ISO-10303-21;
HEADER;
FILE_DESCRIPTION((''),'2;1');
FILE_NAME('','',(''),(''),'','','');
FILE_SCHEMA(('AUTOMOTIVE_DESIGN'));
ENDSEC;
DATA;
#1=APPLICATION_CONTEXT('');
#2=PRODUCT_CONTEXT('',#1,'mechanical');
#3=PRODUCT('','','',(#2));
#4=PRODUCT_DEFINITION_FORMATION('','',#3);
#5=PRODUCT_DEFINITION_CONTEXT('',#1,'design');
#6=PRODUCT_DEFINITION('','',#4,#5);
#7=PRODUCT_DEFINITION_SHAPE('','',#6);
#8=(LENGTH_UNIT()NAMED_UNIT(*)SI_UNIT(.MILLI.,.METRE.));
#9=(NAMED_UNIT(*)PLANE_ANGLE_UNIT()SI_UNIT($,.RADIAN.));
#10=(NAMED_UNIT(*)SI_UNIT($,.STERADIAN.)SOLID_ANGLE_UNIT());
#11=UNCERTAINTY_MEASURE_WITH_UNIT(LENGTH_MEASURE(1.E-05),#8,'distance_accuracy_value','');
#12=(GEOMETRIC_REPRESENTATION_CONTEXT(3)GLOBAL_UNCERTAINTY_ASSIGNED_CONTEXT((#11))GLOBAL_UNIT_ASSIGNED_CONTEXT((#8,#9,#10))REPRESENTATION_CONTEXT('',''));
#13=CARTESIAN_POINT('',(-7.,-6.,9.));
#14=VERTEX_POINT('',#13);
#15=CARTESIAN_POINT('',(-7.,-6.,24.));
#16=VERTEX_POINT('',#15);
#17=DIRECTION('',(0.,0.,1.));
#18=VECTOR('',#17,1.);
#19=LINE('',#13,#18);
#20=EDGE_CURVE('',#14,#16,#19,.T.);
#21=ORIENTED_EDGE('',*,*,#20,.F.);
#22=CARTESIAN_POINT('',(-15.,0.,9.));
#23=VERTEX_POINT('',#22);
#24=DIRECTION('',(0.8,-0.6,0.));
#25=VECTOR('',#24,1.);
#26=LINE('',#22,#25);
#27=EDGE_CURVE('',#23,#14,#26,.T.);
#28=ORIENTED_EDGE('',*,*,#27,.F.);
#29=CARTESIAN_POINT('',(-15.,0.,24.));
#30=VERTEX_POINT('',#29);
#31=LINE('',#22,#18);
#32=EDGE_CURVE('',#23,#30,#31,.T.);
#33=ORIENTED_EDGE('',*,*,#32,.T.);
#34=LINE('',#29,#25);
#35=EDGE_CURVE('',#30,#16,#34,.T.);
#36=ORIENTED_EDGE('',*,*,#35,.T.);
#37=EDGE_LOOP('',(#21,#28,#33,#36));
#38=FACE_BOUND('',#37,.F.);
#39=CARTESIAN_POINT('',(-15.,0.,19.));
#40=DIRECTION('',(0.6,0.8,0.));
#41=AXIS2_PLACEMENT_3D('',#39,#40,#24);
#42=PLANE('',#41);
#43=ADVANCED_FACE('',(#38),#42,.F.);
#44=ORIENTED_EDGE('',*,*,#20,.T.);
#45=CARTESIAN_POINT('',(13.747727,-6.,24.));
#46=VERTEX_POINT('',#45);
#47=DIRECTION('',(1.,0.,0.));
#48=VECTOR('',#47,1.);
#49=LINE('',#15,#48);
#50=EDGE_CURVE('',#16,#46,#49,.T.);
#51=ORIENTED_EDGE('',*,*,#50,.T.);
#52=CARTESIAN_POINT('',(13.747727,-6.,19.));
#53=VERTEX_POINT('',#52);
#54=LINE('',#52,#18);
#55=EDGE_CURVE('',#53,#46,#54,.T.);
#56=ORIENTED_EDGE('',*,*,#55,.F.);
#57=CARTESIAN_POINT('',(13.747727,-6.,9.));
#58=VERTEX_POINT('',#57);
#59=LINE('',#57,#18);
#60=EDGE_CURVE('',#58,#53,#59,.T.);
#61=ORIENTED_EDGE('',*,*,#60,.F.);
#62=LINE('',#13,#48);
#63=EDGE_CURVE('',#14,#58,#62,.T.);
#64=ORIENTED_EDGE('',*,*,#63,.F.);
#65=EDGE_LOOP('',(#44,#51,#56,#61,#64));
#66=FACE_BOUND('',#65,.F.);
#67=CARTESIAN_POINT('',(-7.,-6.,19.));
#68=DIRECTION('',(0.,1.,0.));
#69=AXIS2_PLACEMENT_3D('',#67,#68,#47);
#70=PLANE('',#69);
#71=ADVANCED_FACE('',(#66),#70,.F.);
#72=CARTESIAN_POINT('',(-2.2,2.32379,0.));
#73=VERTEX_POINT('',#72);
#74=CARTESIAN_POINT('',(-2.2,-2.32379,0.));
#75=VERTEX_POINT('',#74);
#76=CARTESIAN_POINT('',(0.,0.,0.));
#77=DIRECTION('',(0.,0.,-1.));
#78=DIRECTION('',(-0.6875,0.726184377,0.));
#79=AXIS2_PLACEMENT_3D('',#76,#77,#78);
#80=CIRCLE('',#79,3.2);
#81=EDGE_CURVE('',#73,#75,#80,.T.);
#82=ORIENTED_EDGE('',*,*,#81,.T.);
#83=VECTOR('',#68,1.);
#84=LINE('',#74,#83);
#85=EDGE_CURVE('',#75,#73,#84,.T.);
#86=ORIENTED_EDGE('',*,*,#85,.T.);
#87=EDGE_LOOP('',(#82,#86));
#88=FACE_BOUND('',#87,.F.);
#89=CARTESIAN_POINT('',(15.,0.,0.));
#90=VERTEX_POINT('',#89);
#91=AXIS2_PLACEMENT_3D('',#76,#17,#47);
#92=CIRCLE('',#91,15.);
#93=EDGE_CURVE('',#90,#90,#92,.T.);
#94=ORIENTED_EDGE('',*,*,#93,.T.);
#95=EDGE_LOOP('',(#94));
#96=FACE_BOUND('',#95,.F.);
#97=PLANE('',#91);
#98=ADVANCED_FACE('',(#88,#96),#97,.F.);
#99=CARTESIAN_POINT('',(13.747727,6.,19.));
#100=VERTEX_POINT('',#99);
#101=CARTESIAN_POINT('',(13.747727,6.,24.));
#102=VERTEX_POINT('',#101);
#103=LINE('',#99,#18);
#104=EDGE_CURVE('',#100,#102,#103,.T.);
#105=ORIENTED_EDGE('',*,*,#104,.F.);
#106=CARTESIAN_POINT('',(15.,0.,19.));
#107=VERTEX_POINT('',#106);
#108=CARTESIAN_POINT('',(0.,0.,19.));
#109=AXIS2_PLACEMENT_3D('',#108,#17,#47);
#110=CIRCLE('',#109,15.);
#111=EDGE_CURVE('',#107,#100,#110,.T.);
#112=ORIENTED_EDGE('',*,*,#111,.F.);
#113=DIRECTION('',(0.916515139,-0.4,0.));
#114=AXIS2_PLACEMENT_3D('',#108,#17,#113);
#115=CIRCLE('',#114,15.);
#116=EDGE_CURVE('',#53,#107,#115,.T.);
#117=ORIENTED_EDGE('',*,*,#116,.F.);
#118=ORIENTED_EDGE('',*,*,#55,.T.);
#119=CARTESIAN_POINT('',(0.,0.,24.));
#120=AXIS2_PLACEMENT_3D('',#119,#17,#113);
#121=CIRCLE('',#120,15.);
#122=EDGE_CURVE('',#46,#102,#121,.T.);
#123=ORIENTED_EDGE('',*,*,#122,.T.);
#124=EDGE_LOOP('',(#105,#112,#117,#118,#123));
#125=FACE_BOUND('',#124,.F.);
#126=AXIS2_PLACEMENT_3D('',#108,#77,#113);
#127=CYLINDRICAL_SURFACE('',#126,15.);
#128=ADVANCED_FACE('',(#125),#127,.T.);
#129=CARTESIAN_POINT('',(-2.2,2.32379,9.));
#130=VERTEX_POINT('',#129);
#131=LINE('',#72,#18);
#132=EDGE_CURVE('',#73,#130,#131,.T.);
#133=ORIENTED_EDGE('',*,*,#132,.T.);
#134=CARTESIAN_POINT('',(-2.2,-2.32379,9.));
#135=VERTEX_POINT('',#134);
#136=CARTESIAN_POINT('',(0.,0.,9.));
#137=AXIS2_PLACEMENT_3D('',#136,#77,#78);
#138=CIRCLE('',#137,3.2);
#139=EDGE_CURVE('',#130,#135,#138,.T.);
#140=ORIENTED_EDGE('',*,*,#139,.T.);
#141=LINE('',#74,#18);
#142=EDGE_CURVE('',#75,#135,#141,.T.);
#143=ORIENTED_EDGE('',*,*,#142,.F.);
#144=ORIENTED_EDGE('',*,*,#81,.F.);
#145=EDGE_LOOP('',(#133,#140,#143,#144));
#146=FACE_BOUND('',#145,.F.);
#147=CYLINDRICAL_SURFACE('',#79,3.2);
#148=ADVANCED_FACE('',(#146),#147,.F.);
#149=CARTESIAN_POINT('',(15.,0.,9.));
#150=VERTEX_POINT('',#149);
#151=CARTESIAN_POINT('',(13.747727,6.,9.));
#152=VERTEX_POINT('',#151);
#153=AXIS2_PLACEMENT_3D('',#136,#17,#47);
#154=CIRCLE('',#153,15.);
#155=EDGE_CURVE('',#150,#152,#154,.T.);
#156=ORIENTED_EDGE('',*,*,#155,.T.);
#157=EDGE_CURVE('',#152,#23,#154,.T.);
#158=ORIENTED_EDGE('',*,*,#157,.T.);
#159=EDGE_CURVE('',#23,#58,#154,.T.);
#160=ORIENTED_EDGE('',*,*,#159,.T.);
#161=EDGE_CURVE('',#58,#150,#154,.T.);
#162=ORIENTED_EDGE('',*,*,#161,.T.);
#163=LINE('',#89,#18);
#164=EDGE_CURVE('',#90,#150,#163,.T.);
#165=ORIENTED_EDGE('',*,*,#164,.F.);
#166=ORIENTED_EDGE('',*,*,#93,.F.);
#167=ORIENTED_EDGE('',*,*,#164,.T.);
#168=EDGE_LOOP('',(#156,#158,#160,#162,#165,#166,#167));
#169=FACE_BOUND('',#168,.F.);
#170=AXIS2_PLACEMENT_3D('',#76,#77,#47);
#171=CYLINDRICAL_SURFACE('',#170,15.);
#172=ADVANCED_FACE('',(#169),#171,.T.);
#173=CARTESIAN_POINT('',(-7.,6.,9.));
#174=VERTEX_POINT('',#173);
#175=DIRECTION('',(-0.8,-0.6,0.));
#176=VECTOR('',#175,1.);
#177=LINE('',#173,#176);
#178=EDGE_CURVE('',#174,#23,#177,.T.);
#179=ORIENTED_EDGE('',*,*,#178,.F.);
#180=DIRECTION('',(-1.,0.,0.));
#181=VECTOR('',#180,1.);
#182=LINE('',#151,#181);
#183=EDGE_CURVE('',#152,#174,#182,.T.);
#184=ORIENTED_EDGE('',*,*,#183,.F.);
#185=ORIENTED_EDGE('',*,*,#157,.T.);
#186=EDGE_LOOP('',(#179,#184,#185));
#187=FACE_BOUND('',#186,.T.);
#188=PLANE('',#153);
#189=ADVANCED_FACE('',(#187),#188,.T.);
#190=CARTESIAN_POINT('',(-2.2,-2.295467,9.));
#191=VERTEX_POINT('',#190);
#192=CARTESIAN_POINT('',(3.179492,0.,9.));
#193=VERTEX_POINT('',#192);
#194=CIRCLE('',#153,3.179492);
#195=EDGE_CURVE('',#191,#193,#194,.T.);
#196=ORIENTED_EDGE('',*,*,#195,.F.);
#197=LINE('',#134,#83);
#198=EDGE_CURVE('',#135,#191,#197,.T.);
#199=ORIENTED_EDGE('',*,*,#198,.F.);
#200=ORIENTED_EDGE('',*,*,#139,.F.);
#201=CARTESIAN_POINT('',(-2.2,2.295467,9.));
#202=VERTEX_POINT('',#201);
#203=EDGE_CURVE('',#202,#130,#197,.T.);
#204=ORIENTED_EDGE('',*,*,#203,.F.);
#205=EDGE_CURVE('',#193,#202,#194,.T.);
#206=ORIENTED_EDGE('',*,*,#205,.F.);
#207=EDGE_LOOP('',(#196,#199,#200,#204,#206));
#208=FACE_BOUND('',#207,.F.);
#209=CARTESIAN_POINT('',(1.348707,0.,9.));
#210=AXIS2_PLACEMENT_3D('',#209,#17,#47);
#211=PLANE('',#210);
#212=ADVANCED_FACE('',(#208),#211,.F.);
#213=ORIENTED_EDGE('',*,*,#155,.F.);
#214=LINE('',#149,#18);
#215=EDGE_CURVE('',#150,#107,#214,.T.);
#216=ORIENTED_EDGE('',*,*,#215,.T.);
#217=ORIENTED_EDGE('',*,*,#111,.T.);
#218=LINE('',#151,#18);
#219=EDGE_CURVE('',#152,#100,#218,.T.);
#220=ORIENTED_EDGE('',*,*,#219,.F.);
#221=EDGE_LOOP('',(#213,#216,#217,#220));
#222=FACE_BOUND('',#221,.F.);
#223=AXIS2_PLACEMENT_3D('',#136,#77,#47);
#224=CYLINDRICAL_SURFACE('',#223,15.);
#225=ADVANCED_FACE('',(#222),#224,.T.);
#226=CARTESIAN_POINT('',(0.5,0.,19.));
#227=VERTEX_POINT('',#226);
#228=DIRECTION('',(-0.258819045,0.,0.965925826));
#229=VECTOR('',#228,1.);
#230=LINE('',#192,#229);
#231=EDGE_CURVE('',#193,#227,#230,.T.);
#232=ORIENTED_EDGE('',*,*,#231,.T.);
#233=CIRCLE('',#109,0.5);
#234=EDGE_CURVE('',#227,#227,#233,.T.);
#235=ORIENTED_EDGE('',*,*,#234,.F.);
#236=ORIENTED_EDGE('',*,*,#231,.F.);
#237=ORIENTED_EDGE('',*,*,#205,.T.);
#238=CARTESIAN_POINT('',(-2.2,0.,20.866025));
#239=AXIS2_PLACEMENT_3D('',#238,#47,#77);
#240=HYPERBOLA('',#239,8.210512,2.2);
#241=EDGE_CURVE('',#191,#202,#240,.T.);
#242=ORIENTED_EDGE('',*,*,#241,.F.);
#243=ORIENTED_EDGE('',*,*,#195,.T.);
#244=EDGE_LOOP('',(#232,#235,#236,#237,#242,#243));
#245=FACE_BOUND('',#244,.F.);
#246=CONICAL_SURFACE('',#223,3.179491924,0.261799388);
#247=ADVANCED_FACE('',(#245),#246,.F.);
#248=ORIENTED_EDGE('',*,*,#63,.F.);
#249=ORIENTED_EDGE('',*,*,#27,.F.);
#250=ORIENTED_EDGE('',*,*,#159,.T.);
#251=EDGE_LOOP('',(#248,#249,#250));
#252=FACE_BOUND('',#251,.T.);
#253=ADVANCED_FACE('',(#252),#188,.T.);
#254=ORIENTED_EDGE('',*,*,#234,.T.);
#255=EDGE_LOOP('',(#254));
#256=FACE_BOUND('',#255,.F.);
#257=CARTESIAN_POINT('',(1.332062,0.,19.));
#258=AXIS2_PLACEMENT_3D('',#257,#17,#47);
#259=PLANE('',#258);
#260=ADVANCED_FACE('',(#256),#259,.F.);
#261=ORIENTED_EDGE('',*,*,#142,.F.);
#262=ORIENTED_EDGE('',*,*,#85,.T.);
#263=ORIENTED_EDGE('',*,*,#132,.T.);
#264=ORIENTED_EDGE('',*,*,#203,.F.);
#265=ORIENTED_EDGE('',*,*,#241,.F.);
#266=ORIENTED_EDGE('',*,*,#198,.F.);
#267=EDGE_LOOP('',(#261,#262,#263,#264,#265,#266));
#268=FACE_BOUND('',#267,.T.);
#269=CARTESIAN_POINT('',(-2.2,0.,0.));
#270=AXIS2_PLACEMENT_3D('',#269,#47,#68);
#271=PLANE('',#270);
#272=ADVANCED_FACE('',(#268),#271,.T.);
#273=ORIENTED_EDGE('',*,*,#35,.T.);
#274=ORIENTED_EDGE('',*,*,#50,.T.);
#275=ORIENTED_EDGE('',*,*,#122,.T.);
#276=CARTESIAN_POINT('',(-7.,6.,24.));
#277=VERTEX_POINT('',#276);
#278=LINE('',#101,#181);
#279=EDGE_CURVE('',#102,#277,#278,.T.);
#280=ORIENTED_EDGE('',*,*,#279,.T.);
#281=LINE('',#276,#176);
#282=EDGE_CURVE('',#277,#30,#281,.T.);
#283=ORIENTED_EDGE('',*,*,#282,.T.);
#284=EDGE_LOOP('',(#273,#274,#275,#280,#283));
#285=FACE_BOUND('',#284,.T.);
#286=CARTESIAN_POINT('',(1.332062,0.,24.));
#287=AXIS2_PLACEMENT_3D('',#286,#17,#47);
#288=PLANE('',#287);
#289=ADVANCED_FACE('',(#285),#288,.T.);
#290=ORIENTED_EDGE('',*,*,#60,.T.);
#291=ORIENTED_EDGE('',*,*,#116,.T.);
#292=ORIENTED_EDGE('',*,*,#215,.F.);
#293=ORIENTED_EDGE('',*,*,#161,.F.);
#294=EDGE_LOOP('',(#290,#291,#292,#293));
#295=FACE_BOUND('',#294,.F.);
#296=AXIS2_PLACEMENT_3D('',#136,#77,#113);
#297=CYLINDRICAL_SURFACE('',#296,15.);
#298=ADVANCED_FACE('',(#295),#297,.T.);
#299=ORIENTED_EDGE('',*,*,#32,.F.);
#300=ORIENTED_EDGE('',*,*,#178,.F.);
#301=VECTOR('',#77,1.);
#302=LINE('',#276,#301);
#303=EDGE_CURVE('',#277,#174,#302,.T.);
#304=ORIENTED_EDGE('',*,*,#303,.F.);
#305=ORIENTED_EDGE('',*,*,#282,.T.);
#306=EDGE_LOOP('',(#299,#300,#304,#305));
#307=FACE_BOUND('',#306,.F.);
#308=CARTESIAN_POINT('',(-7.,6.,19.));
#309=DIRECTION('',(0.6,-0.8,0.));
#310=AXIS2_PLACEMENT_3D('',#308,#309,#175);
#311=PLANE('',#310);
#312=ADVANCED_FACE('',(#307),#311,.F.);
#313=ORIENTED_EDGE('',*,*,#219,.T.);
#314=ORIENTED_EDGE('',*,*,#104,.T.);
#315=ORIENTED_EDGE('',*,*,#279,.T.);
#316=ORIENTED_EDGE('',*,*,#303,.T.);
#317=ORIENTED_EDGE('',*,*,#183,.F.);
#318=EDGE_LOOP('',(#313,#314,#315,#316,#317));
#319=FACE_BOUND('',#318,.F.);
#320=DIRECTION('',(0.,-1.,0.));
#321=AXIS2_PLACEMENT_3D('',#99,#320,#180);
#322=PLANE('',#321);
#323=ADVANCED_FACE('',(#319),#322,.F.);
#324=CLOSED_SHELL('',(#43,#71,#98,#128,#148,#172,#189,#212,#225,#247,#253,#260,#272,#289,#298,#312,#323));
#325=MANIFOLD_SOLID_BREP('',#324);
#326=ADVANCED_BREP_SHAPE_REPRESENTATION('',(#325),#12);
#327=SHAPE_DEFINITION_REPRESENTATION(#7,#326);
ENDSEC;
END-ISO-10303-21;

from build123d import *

# Parameters (mm, degrees)
F0_R     = 15
F1_DEPTH = 9
F2_R     = 0.5
F3_DEPTH = 10
F6_DEPTH = 5


# Not quite as in the source:
# - a fillet or chamfer that OpenCascade refuses, or shapes differently, is made with other operations: its cross-section is extruded or revolved along the edge and cut away or added


with BuildPart() as f1:
    # F0 (on Top) → F1 (new body)
    with BuildSketch(Plane.XY):
        Circle(F0_R)
        with BuildLine():
            Line((-2.2, -2.3237900077), (-2.2, 2.3237900077))
            ThreePointArc((-2.2, 2.3237900077), (3.2, 0), (-2.2, -2.3237900077))
        make_face(mode=Mode.SUBTRACT)
    extrude(amount=F1_DEPTH)

    # F2 (on face) → F3 (join)
    with BuildSketch(Plane.XY.offset(9)):
        with BuildLine():
            Line((-7, 6), (-15, 0))
            Line((-15, 0), (-7, -6))
            Line((-7, -6), (13.7477270849, -6))
            ThreePointArc((13.7477270849, -6), (14.683594694, -3.0646446553), (15, 0))
            ThreePointArc((15, 0), (14.683594694, 3.0646446553), (13.7477270849, 6))
            Line((13.7477270849, 6), (-7, 6))
        make_face()
        Circle(F2_R, mode=Mode.SUBTRACT)
    extrude(amount=F3_DEPTH)

    # F4: chamfer of 10 x 2.6794919243 on 1 edges, made by hand


with BuildPart() as f4_tool2:
    # F4_s3 → F4_t4 (revolve)
    with BuildSketch(Plane.XZ):
        Polygon((3.1794919243, 9), (0.5, 19), (0.5, 9), align=None)
    revolve(axis=Axis((0, 0, 9), (0, 0, 1)))

    split(bisect_by=Plane.YZ.offset(-2.2), keep=Keep.TOP)


with BuildPart() as f1_1:
    add(f1.part)

    # F4_t1: cut F4_tool2
    add(f4_tool2.part, mode=Mode.SUBTRACT)

    # F5 (on face) → F6 (join)
    with BuildSketch(Plane.XY.offset(19)):
        with BuildLine():
            Line((-7, 6), (-15, 0))
            Line((-15, 0), (-7, -6))
            Line((-7, -6), (13.7477270849, -6))
            ThreePointArc((13.7477270849, -6), (15, 0), (13.7477270849, 6))
            Line((13.7477270849, 6), (-7, 6))
        make_face()
    extrude(amount=F6_DEPTH)


solid = f1_1.part
